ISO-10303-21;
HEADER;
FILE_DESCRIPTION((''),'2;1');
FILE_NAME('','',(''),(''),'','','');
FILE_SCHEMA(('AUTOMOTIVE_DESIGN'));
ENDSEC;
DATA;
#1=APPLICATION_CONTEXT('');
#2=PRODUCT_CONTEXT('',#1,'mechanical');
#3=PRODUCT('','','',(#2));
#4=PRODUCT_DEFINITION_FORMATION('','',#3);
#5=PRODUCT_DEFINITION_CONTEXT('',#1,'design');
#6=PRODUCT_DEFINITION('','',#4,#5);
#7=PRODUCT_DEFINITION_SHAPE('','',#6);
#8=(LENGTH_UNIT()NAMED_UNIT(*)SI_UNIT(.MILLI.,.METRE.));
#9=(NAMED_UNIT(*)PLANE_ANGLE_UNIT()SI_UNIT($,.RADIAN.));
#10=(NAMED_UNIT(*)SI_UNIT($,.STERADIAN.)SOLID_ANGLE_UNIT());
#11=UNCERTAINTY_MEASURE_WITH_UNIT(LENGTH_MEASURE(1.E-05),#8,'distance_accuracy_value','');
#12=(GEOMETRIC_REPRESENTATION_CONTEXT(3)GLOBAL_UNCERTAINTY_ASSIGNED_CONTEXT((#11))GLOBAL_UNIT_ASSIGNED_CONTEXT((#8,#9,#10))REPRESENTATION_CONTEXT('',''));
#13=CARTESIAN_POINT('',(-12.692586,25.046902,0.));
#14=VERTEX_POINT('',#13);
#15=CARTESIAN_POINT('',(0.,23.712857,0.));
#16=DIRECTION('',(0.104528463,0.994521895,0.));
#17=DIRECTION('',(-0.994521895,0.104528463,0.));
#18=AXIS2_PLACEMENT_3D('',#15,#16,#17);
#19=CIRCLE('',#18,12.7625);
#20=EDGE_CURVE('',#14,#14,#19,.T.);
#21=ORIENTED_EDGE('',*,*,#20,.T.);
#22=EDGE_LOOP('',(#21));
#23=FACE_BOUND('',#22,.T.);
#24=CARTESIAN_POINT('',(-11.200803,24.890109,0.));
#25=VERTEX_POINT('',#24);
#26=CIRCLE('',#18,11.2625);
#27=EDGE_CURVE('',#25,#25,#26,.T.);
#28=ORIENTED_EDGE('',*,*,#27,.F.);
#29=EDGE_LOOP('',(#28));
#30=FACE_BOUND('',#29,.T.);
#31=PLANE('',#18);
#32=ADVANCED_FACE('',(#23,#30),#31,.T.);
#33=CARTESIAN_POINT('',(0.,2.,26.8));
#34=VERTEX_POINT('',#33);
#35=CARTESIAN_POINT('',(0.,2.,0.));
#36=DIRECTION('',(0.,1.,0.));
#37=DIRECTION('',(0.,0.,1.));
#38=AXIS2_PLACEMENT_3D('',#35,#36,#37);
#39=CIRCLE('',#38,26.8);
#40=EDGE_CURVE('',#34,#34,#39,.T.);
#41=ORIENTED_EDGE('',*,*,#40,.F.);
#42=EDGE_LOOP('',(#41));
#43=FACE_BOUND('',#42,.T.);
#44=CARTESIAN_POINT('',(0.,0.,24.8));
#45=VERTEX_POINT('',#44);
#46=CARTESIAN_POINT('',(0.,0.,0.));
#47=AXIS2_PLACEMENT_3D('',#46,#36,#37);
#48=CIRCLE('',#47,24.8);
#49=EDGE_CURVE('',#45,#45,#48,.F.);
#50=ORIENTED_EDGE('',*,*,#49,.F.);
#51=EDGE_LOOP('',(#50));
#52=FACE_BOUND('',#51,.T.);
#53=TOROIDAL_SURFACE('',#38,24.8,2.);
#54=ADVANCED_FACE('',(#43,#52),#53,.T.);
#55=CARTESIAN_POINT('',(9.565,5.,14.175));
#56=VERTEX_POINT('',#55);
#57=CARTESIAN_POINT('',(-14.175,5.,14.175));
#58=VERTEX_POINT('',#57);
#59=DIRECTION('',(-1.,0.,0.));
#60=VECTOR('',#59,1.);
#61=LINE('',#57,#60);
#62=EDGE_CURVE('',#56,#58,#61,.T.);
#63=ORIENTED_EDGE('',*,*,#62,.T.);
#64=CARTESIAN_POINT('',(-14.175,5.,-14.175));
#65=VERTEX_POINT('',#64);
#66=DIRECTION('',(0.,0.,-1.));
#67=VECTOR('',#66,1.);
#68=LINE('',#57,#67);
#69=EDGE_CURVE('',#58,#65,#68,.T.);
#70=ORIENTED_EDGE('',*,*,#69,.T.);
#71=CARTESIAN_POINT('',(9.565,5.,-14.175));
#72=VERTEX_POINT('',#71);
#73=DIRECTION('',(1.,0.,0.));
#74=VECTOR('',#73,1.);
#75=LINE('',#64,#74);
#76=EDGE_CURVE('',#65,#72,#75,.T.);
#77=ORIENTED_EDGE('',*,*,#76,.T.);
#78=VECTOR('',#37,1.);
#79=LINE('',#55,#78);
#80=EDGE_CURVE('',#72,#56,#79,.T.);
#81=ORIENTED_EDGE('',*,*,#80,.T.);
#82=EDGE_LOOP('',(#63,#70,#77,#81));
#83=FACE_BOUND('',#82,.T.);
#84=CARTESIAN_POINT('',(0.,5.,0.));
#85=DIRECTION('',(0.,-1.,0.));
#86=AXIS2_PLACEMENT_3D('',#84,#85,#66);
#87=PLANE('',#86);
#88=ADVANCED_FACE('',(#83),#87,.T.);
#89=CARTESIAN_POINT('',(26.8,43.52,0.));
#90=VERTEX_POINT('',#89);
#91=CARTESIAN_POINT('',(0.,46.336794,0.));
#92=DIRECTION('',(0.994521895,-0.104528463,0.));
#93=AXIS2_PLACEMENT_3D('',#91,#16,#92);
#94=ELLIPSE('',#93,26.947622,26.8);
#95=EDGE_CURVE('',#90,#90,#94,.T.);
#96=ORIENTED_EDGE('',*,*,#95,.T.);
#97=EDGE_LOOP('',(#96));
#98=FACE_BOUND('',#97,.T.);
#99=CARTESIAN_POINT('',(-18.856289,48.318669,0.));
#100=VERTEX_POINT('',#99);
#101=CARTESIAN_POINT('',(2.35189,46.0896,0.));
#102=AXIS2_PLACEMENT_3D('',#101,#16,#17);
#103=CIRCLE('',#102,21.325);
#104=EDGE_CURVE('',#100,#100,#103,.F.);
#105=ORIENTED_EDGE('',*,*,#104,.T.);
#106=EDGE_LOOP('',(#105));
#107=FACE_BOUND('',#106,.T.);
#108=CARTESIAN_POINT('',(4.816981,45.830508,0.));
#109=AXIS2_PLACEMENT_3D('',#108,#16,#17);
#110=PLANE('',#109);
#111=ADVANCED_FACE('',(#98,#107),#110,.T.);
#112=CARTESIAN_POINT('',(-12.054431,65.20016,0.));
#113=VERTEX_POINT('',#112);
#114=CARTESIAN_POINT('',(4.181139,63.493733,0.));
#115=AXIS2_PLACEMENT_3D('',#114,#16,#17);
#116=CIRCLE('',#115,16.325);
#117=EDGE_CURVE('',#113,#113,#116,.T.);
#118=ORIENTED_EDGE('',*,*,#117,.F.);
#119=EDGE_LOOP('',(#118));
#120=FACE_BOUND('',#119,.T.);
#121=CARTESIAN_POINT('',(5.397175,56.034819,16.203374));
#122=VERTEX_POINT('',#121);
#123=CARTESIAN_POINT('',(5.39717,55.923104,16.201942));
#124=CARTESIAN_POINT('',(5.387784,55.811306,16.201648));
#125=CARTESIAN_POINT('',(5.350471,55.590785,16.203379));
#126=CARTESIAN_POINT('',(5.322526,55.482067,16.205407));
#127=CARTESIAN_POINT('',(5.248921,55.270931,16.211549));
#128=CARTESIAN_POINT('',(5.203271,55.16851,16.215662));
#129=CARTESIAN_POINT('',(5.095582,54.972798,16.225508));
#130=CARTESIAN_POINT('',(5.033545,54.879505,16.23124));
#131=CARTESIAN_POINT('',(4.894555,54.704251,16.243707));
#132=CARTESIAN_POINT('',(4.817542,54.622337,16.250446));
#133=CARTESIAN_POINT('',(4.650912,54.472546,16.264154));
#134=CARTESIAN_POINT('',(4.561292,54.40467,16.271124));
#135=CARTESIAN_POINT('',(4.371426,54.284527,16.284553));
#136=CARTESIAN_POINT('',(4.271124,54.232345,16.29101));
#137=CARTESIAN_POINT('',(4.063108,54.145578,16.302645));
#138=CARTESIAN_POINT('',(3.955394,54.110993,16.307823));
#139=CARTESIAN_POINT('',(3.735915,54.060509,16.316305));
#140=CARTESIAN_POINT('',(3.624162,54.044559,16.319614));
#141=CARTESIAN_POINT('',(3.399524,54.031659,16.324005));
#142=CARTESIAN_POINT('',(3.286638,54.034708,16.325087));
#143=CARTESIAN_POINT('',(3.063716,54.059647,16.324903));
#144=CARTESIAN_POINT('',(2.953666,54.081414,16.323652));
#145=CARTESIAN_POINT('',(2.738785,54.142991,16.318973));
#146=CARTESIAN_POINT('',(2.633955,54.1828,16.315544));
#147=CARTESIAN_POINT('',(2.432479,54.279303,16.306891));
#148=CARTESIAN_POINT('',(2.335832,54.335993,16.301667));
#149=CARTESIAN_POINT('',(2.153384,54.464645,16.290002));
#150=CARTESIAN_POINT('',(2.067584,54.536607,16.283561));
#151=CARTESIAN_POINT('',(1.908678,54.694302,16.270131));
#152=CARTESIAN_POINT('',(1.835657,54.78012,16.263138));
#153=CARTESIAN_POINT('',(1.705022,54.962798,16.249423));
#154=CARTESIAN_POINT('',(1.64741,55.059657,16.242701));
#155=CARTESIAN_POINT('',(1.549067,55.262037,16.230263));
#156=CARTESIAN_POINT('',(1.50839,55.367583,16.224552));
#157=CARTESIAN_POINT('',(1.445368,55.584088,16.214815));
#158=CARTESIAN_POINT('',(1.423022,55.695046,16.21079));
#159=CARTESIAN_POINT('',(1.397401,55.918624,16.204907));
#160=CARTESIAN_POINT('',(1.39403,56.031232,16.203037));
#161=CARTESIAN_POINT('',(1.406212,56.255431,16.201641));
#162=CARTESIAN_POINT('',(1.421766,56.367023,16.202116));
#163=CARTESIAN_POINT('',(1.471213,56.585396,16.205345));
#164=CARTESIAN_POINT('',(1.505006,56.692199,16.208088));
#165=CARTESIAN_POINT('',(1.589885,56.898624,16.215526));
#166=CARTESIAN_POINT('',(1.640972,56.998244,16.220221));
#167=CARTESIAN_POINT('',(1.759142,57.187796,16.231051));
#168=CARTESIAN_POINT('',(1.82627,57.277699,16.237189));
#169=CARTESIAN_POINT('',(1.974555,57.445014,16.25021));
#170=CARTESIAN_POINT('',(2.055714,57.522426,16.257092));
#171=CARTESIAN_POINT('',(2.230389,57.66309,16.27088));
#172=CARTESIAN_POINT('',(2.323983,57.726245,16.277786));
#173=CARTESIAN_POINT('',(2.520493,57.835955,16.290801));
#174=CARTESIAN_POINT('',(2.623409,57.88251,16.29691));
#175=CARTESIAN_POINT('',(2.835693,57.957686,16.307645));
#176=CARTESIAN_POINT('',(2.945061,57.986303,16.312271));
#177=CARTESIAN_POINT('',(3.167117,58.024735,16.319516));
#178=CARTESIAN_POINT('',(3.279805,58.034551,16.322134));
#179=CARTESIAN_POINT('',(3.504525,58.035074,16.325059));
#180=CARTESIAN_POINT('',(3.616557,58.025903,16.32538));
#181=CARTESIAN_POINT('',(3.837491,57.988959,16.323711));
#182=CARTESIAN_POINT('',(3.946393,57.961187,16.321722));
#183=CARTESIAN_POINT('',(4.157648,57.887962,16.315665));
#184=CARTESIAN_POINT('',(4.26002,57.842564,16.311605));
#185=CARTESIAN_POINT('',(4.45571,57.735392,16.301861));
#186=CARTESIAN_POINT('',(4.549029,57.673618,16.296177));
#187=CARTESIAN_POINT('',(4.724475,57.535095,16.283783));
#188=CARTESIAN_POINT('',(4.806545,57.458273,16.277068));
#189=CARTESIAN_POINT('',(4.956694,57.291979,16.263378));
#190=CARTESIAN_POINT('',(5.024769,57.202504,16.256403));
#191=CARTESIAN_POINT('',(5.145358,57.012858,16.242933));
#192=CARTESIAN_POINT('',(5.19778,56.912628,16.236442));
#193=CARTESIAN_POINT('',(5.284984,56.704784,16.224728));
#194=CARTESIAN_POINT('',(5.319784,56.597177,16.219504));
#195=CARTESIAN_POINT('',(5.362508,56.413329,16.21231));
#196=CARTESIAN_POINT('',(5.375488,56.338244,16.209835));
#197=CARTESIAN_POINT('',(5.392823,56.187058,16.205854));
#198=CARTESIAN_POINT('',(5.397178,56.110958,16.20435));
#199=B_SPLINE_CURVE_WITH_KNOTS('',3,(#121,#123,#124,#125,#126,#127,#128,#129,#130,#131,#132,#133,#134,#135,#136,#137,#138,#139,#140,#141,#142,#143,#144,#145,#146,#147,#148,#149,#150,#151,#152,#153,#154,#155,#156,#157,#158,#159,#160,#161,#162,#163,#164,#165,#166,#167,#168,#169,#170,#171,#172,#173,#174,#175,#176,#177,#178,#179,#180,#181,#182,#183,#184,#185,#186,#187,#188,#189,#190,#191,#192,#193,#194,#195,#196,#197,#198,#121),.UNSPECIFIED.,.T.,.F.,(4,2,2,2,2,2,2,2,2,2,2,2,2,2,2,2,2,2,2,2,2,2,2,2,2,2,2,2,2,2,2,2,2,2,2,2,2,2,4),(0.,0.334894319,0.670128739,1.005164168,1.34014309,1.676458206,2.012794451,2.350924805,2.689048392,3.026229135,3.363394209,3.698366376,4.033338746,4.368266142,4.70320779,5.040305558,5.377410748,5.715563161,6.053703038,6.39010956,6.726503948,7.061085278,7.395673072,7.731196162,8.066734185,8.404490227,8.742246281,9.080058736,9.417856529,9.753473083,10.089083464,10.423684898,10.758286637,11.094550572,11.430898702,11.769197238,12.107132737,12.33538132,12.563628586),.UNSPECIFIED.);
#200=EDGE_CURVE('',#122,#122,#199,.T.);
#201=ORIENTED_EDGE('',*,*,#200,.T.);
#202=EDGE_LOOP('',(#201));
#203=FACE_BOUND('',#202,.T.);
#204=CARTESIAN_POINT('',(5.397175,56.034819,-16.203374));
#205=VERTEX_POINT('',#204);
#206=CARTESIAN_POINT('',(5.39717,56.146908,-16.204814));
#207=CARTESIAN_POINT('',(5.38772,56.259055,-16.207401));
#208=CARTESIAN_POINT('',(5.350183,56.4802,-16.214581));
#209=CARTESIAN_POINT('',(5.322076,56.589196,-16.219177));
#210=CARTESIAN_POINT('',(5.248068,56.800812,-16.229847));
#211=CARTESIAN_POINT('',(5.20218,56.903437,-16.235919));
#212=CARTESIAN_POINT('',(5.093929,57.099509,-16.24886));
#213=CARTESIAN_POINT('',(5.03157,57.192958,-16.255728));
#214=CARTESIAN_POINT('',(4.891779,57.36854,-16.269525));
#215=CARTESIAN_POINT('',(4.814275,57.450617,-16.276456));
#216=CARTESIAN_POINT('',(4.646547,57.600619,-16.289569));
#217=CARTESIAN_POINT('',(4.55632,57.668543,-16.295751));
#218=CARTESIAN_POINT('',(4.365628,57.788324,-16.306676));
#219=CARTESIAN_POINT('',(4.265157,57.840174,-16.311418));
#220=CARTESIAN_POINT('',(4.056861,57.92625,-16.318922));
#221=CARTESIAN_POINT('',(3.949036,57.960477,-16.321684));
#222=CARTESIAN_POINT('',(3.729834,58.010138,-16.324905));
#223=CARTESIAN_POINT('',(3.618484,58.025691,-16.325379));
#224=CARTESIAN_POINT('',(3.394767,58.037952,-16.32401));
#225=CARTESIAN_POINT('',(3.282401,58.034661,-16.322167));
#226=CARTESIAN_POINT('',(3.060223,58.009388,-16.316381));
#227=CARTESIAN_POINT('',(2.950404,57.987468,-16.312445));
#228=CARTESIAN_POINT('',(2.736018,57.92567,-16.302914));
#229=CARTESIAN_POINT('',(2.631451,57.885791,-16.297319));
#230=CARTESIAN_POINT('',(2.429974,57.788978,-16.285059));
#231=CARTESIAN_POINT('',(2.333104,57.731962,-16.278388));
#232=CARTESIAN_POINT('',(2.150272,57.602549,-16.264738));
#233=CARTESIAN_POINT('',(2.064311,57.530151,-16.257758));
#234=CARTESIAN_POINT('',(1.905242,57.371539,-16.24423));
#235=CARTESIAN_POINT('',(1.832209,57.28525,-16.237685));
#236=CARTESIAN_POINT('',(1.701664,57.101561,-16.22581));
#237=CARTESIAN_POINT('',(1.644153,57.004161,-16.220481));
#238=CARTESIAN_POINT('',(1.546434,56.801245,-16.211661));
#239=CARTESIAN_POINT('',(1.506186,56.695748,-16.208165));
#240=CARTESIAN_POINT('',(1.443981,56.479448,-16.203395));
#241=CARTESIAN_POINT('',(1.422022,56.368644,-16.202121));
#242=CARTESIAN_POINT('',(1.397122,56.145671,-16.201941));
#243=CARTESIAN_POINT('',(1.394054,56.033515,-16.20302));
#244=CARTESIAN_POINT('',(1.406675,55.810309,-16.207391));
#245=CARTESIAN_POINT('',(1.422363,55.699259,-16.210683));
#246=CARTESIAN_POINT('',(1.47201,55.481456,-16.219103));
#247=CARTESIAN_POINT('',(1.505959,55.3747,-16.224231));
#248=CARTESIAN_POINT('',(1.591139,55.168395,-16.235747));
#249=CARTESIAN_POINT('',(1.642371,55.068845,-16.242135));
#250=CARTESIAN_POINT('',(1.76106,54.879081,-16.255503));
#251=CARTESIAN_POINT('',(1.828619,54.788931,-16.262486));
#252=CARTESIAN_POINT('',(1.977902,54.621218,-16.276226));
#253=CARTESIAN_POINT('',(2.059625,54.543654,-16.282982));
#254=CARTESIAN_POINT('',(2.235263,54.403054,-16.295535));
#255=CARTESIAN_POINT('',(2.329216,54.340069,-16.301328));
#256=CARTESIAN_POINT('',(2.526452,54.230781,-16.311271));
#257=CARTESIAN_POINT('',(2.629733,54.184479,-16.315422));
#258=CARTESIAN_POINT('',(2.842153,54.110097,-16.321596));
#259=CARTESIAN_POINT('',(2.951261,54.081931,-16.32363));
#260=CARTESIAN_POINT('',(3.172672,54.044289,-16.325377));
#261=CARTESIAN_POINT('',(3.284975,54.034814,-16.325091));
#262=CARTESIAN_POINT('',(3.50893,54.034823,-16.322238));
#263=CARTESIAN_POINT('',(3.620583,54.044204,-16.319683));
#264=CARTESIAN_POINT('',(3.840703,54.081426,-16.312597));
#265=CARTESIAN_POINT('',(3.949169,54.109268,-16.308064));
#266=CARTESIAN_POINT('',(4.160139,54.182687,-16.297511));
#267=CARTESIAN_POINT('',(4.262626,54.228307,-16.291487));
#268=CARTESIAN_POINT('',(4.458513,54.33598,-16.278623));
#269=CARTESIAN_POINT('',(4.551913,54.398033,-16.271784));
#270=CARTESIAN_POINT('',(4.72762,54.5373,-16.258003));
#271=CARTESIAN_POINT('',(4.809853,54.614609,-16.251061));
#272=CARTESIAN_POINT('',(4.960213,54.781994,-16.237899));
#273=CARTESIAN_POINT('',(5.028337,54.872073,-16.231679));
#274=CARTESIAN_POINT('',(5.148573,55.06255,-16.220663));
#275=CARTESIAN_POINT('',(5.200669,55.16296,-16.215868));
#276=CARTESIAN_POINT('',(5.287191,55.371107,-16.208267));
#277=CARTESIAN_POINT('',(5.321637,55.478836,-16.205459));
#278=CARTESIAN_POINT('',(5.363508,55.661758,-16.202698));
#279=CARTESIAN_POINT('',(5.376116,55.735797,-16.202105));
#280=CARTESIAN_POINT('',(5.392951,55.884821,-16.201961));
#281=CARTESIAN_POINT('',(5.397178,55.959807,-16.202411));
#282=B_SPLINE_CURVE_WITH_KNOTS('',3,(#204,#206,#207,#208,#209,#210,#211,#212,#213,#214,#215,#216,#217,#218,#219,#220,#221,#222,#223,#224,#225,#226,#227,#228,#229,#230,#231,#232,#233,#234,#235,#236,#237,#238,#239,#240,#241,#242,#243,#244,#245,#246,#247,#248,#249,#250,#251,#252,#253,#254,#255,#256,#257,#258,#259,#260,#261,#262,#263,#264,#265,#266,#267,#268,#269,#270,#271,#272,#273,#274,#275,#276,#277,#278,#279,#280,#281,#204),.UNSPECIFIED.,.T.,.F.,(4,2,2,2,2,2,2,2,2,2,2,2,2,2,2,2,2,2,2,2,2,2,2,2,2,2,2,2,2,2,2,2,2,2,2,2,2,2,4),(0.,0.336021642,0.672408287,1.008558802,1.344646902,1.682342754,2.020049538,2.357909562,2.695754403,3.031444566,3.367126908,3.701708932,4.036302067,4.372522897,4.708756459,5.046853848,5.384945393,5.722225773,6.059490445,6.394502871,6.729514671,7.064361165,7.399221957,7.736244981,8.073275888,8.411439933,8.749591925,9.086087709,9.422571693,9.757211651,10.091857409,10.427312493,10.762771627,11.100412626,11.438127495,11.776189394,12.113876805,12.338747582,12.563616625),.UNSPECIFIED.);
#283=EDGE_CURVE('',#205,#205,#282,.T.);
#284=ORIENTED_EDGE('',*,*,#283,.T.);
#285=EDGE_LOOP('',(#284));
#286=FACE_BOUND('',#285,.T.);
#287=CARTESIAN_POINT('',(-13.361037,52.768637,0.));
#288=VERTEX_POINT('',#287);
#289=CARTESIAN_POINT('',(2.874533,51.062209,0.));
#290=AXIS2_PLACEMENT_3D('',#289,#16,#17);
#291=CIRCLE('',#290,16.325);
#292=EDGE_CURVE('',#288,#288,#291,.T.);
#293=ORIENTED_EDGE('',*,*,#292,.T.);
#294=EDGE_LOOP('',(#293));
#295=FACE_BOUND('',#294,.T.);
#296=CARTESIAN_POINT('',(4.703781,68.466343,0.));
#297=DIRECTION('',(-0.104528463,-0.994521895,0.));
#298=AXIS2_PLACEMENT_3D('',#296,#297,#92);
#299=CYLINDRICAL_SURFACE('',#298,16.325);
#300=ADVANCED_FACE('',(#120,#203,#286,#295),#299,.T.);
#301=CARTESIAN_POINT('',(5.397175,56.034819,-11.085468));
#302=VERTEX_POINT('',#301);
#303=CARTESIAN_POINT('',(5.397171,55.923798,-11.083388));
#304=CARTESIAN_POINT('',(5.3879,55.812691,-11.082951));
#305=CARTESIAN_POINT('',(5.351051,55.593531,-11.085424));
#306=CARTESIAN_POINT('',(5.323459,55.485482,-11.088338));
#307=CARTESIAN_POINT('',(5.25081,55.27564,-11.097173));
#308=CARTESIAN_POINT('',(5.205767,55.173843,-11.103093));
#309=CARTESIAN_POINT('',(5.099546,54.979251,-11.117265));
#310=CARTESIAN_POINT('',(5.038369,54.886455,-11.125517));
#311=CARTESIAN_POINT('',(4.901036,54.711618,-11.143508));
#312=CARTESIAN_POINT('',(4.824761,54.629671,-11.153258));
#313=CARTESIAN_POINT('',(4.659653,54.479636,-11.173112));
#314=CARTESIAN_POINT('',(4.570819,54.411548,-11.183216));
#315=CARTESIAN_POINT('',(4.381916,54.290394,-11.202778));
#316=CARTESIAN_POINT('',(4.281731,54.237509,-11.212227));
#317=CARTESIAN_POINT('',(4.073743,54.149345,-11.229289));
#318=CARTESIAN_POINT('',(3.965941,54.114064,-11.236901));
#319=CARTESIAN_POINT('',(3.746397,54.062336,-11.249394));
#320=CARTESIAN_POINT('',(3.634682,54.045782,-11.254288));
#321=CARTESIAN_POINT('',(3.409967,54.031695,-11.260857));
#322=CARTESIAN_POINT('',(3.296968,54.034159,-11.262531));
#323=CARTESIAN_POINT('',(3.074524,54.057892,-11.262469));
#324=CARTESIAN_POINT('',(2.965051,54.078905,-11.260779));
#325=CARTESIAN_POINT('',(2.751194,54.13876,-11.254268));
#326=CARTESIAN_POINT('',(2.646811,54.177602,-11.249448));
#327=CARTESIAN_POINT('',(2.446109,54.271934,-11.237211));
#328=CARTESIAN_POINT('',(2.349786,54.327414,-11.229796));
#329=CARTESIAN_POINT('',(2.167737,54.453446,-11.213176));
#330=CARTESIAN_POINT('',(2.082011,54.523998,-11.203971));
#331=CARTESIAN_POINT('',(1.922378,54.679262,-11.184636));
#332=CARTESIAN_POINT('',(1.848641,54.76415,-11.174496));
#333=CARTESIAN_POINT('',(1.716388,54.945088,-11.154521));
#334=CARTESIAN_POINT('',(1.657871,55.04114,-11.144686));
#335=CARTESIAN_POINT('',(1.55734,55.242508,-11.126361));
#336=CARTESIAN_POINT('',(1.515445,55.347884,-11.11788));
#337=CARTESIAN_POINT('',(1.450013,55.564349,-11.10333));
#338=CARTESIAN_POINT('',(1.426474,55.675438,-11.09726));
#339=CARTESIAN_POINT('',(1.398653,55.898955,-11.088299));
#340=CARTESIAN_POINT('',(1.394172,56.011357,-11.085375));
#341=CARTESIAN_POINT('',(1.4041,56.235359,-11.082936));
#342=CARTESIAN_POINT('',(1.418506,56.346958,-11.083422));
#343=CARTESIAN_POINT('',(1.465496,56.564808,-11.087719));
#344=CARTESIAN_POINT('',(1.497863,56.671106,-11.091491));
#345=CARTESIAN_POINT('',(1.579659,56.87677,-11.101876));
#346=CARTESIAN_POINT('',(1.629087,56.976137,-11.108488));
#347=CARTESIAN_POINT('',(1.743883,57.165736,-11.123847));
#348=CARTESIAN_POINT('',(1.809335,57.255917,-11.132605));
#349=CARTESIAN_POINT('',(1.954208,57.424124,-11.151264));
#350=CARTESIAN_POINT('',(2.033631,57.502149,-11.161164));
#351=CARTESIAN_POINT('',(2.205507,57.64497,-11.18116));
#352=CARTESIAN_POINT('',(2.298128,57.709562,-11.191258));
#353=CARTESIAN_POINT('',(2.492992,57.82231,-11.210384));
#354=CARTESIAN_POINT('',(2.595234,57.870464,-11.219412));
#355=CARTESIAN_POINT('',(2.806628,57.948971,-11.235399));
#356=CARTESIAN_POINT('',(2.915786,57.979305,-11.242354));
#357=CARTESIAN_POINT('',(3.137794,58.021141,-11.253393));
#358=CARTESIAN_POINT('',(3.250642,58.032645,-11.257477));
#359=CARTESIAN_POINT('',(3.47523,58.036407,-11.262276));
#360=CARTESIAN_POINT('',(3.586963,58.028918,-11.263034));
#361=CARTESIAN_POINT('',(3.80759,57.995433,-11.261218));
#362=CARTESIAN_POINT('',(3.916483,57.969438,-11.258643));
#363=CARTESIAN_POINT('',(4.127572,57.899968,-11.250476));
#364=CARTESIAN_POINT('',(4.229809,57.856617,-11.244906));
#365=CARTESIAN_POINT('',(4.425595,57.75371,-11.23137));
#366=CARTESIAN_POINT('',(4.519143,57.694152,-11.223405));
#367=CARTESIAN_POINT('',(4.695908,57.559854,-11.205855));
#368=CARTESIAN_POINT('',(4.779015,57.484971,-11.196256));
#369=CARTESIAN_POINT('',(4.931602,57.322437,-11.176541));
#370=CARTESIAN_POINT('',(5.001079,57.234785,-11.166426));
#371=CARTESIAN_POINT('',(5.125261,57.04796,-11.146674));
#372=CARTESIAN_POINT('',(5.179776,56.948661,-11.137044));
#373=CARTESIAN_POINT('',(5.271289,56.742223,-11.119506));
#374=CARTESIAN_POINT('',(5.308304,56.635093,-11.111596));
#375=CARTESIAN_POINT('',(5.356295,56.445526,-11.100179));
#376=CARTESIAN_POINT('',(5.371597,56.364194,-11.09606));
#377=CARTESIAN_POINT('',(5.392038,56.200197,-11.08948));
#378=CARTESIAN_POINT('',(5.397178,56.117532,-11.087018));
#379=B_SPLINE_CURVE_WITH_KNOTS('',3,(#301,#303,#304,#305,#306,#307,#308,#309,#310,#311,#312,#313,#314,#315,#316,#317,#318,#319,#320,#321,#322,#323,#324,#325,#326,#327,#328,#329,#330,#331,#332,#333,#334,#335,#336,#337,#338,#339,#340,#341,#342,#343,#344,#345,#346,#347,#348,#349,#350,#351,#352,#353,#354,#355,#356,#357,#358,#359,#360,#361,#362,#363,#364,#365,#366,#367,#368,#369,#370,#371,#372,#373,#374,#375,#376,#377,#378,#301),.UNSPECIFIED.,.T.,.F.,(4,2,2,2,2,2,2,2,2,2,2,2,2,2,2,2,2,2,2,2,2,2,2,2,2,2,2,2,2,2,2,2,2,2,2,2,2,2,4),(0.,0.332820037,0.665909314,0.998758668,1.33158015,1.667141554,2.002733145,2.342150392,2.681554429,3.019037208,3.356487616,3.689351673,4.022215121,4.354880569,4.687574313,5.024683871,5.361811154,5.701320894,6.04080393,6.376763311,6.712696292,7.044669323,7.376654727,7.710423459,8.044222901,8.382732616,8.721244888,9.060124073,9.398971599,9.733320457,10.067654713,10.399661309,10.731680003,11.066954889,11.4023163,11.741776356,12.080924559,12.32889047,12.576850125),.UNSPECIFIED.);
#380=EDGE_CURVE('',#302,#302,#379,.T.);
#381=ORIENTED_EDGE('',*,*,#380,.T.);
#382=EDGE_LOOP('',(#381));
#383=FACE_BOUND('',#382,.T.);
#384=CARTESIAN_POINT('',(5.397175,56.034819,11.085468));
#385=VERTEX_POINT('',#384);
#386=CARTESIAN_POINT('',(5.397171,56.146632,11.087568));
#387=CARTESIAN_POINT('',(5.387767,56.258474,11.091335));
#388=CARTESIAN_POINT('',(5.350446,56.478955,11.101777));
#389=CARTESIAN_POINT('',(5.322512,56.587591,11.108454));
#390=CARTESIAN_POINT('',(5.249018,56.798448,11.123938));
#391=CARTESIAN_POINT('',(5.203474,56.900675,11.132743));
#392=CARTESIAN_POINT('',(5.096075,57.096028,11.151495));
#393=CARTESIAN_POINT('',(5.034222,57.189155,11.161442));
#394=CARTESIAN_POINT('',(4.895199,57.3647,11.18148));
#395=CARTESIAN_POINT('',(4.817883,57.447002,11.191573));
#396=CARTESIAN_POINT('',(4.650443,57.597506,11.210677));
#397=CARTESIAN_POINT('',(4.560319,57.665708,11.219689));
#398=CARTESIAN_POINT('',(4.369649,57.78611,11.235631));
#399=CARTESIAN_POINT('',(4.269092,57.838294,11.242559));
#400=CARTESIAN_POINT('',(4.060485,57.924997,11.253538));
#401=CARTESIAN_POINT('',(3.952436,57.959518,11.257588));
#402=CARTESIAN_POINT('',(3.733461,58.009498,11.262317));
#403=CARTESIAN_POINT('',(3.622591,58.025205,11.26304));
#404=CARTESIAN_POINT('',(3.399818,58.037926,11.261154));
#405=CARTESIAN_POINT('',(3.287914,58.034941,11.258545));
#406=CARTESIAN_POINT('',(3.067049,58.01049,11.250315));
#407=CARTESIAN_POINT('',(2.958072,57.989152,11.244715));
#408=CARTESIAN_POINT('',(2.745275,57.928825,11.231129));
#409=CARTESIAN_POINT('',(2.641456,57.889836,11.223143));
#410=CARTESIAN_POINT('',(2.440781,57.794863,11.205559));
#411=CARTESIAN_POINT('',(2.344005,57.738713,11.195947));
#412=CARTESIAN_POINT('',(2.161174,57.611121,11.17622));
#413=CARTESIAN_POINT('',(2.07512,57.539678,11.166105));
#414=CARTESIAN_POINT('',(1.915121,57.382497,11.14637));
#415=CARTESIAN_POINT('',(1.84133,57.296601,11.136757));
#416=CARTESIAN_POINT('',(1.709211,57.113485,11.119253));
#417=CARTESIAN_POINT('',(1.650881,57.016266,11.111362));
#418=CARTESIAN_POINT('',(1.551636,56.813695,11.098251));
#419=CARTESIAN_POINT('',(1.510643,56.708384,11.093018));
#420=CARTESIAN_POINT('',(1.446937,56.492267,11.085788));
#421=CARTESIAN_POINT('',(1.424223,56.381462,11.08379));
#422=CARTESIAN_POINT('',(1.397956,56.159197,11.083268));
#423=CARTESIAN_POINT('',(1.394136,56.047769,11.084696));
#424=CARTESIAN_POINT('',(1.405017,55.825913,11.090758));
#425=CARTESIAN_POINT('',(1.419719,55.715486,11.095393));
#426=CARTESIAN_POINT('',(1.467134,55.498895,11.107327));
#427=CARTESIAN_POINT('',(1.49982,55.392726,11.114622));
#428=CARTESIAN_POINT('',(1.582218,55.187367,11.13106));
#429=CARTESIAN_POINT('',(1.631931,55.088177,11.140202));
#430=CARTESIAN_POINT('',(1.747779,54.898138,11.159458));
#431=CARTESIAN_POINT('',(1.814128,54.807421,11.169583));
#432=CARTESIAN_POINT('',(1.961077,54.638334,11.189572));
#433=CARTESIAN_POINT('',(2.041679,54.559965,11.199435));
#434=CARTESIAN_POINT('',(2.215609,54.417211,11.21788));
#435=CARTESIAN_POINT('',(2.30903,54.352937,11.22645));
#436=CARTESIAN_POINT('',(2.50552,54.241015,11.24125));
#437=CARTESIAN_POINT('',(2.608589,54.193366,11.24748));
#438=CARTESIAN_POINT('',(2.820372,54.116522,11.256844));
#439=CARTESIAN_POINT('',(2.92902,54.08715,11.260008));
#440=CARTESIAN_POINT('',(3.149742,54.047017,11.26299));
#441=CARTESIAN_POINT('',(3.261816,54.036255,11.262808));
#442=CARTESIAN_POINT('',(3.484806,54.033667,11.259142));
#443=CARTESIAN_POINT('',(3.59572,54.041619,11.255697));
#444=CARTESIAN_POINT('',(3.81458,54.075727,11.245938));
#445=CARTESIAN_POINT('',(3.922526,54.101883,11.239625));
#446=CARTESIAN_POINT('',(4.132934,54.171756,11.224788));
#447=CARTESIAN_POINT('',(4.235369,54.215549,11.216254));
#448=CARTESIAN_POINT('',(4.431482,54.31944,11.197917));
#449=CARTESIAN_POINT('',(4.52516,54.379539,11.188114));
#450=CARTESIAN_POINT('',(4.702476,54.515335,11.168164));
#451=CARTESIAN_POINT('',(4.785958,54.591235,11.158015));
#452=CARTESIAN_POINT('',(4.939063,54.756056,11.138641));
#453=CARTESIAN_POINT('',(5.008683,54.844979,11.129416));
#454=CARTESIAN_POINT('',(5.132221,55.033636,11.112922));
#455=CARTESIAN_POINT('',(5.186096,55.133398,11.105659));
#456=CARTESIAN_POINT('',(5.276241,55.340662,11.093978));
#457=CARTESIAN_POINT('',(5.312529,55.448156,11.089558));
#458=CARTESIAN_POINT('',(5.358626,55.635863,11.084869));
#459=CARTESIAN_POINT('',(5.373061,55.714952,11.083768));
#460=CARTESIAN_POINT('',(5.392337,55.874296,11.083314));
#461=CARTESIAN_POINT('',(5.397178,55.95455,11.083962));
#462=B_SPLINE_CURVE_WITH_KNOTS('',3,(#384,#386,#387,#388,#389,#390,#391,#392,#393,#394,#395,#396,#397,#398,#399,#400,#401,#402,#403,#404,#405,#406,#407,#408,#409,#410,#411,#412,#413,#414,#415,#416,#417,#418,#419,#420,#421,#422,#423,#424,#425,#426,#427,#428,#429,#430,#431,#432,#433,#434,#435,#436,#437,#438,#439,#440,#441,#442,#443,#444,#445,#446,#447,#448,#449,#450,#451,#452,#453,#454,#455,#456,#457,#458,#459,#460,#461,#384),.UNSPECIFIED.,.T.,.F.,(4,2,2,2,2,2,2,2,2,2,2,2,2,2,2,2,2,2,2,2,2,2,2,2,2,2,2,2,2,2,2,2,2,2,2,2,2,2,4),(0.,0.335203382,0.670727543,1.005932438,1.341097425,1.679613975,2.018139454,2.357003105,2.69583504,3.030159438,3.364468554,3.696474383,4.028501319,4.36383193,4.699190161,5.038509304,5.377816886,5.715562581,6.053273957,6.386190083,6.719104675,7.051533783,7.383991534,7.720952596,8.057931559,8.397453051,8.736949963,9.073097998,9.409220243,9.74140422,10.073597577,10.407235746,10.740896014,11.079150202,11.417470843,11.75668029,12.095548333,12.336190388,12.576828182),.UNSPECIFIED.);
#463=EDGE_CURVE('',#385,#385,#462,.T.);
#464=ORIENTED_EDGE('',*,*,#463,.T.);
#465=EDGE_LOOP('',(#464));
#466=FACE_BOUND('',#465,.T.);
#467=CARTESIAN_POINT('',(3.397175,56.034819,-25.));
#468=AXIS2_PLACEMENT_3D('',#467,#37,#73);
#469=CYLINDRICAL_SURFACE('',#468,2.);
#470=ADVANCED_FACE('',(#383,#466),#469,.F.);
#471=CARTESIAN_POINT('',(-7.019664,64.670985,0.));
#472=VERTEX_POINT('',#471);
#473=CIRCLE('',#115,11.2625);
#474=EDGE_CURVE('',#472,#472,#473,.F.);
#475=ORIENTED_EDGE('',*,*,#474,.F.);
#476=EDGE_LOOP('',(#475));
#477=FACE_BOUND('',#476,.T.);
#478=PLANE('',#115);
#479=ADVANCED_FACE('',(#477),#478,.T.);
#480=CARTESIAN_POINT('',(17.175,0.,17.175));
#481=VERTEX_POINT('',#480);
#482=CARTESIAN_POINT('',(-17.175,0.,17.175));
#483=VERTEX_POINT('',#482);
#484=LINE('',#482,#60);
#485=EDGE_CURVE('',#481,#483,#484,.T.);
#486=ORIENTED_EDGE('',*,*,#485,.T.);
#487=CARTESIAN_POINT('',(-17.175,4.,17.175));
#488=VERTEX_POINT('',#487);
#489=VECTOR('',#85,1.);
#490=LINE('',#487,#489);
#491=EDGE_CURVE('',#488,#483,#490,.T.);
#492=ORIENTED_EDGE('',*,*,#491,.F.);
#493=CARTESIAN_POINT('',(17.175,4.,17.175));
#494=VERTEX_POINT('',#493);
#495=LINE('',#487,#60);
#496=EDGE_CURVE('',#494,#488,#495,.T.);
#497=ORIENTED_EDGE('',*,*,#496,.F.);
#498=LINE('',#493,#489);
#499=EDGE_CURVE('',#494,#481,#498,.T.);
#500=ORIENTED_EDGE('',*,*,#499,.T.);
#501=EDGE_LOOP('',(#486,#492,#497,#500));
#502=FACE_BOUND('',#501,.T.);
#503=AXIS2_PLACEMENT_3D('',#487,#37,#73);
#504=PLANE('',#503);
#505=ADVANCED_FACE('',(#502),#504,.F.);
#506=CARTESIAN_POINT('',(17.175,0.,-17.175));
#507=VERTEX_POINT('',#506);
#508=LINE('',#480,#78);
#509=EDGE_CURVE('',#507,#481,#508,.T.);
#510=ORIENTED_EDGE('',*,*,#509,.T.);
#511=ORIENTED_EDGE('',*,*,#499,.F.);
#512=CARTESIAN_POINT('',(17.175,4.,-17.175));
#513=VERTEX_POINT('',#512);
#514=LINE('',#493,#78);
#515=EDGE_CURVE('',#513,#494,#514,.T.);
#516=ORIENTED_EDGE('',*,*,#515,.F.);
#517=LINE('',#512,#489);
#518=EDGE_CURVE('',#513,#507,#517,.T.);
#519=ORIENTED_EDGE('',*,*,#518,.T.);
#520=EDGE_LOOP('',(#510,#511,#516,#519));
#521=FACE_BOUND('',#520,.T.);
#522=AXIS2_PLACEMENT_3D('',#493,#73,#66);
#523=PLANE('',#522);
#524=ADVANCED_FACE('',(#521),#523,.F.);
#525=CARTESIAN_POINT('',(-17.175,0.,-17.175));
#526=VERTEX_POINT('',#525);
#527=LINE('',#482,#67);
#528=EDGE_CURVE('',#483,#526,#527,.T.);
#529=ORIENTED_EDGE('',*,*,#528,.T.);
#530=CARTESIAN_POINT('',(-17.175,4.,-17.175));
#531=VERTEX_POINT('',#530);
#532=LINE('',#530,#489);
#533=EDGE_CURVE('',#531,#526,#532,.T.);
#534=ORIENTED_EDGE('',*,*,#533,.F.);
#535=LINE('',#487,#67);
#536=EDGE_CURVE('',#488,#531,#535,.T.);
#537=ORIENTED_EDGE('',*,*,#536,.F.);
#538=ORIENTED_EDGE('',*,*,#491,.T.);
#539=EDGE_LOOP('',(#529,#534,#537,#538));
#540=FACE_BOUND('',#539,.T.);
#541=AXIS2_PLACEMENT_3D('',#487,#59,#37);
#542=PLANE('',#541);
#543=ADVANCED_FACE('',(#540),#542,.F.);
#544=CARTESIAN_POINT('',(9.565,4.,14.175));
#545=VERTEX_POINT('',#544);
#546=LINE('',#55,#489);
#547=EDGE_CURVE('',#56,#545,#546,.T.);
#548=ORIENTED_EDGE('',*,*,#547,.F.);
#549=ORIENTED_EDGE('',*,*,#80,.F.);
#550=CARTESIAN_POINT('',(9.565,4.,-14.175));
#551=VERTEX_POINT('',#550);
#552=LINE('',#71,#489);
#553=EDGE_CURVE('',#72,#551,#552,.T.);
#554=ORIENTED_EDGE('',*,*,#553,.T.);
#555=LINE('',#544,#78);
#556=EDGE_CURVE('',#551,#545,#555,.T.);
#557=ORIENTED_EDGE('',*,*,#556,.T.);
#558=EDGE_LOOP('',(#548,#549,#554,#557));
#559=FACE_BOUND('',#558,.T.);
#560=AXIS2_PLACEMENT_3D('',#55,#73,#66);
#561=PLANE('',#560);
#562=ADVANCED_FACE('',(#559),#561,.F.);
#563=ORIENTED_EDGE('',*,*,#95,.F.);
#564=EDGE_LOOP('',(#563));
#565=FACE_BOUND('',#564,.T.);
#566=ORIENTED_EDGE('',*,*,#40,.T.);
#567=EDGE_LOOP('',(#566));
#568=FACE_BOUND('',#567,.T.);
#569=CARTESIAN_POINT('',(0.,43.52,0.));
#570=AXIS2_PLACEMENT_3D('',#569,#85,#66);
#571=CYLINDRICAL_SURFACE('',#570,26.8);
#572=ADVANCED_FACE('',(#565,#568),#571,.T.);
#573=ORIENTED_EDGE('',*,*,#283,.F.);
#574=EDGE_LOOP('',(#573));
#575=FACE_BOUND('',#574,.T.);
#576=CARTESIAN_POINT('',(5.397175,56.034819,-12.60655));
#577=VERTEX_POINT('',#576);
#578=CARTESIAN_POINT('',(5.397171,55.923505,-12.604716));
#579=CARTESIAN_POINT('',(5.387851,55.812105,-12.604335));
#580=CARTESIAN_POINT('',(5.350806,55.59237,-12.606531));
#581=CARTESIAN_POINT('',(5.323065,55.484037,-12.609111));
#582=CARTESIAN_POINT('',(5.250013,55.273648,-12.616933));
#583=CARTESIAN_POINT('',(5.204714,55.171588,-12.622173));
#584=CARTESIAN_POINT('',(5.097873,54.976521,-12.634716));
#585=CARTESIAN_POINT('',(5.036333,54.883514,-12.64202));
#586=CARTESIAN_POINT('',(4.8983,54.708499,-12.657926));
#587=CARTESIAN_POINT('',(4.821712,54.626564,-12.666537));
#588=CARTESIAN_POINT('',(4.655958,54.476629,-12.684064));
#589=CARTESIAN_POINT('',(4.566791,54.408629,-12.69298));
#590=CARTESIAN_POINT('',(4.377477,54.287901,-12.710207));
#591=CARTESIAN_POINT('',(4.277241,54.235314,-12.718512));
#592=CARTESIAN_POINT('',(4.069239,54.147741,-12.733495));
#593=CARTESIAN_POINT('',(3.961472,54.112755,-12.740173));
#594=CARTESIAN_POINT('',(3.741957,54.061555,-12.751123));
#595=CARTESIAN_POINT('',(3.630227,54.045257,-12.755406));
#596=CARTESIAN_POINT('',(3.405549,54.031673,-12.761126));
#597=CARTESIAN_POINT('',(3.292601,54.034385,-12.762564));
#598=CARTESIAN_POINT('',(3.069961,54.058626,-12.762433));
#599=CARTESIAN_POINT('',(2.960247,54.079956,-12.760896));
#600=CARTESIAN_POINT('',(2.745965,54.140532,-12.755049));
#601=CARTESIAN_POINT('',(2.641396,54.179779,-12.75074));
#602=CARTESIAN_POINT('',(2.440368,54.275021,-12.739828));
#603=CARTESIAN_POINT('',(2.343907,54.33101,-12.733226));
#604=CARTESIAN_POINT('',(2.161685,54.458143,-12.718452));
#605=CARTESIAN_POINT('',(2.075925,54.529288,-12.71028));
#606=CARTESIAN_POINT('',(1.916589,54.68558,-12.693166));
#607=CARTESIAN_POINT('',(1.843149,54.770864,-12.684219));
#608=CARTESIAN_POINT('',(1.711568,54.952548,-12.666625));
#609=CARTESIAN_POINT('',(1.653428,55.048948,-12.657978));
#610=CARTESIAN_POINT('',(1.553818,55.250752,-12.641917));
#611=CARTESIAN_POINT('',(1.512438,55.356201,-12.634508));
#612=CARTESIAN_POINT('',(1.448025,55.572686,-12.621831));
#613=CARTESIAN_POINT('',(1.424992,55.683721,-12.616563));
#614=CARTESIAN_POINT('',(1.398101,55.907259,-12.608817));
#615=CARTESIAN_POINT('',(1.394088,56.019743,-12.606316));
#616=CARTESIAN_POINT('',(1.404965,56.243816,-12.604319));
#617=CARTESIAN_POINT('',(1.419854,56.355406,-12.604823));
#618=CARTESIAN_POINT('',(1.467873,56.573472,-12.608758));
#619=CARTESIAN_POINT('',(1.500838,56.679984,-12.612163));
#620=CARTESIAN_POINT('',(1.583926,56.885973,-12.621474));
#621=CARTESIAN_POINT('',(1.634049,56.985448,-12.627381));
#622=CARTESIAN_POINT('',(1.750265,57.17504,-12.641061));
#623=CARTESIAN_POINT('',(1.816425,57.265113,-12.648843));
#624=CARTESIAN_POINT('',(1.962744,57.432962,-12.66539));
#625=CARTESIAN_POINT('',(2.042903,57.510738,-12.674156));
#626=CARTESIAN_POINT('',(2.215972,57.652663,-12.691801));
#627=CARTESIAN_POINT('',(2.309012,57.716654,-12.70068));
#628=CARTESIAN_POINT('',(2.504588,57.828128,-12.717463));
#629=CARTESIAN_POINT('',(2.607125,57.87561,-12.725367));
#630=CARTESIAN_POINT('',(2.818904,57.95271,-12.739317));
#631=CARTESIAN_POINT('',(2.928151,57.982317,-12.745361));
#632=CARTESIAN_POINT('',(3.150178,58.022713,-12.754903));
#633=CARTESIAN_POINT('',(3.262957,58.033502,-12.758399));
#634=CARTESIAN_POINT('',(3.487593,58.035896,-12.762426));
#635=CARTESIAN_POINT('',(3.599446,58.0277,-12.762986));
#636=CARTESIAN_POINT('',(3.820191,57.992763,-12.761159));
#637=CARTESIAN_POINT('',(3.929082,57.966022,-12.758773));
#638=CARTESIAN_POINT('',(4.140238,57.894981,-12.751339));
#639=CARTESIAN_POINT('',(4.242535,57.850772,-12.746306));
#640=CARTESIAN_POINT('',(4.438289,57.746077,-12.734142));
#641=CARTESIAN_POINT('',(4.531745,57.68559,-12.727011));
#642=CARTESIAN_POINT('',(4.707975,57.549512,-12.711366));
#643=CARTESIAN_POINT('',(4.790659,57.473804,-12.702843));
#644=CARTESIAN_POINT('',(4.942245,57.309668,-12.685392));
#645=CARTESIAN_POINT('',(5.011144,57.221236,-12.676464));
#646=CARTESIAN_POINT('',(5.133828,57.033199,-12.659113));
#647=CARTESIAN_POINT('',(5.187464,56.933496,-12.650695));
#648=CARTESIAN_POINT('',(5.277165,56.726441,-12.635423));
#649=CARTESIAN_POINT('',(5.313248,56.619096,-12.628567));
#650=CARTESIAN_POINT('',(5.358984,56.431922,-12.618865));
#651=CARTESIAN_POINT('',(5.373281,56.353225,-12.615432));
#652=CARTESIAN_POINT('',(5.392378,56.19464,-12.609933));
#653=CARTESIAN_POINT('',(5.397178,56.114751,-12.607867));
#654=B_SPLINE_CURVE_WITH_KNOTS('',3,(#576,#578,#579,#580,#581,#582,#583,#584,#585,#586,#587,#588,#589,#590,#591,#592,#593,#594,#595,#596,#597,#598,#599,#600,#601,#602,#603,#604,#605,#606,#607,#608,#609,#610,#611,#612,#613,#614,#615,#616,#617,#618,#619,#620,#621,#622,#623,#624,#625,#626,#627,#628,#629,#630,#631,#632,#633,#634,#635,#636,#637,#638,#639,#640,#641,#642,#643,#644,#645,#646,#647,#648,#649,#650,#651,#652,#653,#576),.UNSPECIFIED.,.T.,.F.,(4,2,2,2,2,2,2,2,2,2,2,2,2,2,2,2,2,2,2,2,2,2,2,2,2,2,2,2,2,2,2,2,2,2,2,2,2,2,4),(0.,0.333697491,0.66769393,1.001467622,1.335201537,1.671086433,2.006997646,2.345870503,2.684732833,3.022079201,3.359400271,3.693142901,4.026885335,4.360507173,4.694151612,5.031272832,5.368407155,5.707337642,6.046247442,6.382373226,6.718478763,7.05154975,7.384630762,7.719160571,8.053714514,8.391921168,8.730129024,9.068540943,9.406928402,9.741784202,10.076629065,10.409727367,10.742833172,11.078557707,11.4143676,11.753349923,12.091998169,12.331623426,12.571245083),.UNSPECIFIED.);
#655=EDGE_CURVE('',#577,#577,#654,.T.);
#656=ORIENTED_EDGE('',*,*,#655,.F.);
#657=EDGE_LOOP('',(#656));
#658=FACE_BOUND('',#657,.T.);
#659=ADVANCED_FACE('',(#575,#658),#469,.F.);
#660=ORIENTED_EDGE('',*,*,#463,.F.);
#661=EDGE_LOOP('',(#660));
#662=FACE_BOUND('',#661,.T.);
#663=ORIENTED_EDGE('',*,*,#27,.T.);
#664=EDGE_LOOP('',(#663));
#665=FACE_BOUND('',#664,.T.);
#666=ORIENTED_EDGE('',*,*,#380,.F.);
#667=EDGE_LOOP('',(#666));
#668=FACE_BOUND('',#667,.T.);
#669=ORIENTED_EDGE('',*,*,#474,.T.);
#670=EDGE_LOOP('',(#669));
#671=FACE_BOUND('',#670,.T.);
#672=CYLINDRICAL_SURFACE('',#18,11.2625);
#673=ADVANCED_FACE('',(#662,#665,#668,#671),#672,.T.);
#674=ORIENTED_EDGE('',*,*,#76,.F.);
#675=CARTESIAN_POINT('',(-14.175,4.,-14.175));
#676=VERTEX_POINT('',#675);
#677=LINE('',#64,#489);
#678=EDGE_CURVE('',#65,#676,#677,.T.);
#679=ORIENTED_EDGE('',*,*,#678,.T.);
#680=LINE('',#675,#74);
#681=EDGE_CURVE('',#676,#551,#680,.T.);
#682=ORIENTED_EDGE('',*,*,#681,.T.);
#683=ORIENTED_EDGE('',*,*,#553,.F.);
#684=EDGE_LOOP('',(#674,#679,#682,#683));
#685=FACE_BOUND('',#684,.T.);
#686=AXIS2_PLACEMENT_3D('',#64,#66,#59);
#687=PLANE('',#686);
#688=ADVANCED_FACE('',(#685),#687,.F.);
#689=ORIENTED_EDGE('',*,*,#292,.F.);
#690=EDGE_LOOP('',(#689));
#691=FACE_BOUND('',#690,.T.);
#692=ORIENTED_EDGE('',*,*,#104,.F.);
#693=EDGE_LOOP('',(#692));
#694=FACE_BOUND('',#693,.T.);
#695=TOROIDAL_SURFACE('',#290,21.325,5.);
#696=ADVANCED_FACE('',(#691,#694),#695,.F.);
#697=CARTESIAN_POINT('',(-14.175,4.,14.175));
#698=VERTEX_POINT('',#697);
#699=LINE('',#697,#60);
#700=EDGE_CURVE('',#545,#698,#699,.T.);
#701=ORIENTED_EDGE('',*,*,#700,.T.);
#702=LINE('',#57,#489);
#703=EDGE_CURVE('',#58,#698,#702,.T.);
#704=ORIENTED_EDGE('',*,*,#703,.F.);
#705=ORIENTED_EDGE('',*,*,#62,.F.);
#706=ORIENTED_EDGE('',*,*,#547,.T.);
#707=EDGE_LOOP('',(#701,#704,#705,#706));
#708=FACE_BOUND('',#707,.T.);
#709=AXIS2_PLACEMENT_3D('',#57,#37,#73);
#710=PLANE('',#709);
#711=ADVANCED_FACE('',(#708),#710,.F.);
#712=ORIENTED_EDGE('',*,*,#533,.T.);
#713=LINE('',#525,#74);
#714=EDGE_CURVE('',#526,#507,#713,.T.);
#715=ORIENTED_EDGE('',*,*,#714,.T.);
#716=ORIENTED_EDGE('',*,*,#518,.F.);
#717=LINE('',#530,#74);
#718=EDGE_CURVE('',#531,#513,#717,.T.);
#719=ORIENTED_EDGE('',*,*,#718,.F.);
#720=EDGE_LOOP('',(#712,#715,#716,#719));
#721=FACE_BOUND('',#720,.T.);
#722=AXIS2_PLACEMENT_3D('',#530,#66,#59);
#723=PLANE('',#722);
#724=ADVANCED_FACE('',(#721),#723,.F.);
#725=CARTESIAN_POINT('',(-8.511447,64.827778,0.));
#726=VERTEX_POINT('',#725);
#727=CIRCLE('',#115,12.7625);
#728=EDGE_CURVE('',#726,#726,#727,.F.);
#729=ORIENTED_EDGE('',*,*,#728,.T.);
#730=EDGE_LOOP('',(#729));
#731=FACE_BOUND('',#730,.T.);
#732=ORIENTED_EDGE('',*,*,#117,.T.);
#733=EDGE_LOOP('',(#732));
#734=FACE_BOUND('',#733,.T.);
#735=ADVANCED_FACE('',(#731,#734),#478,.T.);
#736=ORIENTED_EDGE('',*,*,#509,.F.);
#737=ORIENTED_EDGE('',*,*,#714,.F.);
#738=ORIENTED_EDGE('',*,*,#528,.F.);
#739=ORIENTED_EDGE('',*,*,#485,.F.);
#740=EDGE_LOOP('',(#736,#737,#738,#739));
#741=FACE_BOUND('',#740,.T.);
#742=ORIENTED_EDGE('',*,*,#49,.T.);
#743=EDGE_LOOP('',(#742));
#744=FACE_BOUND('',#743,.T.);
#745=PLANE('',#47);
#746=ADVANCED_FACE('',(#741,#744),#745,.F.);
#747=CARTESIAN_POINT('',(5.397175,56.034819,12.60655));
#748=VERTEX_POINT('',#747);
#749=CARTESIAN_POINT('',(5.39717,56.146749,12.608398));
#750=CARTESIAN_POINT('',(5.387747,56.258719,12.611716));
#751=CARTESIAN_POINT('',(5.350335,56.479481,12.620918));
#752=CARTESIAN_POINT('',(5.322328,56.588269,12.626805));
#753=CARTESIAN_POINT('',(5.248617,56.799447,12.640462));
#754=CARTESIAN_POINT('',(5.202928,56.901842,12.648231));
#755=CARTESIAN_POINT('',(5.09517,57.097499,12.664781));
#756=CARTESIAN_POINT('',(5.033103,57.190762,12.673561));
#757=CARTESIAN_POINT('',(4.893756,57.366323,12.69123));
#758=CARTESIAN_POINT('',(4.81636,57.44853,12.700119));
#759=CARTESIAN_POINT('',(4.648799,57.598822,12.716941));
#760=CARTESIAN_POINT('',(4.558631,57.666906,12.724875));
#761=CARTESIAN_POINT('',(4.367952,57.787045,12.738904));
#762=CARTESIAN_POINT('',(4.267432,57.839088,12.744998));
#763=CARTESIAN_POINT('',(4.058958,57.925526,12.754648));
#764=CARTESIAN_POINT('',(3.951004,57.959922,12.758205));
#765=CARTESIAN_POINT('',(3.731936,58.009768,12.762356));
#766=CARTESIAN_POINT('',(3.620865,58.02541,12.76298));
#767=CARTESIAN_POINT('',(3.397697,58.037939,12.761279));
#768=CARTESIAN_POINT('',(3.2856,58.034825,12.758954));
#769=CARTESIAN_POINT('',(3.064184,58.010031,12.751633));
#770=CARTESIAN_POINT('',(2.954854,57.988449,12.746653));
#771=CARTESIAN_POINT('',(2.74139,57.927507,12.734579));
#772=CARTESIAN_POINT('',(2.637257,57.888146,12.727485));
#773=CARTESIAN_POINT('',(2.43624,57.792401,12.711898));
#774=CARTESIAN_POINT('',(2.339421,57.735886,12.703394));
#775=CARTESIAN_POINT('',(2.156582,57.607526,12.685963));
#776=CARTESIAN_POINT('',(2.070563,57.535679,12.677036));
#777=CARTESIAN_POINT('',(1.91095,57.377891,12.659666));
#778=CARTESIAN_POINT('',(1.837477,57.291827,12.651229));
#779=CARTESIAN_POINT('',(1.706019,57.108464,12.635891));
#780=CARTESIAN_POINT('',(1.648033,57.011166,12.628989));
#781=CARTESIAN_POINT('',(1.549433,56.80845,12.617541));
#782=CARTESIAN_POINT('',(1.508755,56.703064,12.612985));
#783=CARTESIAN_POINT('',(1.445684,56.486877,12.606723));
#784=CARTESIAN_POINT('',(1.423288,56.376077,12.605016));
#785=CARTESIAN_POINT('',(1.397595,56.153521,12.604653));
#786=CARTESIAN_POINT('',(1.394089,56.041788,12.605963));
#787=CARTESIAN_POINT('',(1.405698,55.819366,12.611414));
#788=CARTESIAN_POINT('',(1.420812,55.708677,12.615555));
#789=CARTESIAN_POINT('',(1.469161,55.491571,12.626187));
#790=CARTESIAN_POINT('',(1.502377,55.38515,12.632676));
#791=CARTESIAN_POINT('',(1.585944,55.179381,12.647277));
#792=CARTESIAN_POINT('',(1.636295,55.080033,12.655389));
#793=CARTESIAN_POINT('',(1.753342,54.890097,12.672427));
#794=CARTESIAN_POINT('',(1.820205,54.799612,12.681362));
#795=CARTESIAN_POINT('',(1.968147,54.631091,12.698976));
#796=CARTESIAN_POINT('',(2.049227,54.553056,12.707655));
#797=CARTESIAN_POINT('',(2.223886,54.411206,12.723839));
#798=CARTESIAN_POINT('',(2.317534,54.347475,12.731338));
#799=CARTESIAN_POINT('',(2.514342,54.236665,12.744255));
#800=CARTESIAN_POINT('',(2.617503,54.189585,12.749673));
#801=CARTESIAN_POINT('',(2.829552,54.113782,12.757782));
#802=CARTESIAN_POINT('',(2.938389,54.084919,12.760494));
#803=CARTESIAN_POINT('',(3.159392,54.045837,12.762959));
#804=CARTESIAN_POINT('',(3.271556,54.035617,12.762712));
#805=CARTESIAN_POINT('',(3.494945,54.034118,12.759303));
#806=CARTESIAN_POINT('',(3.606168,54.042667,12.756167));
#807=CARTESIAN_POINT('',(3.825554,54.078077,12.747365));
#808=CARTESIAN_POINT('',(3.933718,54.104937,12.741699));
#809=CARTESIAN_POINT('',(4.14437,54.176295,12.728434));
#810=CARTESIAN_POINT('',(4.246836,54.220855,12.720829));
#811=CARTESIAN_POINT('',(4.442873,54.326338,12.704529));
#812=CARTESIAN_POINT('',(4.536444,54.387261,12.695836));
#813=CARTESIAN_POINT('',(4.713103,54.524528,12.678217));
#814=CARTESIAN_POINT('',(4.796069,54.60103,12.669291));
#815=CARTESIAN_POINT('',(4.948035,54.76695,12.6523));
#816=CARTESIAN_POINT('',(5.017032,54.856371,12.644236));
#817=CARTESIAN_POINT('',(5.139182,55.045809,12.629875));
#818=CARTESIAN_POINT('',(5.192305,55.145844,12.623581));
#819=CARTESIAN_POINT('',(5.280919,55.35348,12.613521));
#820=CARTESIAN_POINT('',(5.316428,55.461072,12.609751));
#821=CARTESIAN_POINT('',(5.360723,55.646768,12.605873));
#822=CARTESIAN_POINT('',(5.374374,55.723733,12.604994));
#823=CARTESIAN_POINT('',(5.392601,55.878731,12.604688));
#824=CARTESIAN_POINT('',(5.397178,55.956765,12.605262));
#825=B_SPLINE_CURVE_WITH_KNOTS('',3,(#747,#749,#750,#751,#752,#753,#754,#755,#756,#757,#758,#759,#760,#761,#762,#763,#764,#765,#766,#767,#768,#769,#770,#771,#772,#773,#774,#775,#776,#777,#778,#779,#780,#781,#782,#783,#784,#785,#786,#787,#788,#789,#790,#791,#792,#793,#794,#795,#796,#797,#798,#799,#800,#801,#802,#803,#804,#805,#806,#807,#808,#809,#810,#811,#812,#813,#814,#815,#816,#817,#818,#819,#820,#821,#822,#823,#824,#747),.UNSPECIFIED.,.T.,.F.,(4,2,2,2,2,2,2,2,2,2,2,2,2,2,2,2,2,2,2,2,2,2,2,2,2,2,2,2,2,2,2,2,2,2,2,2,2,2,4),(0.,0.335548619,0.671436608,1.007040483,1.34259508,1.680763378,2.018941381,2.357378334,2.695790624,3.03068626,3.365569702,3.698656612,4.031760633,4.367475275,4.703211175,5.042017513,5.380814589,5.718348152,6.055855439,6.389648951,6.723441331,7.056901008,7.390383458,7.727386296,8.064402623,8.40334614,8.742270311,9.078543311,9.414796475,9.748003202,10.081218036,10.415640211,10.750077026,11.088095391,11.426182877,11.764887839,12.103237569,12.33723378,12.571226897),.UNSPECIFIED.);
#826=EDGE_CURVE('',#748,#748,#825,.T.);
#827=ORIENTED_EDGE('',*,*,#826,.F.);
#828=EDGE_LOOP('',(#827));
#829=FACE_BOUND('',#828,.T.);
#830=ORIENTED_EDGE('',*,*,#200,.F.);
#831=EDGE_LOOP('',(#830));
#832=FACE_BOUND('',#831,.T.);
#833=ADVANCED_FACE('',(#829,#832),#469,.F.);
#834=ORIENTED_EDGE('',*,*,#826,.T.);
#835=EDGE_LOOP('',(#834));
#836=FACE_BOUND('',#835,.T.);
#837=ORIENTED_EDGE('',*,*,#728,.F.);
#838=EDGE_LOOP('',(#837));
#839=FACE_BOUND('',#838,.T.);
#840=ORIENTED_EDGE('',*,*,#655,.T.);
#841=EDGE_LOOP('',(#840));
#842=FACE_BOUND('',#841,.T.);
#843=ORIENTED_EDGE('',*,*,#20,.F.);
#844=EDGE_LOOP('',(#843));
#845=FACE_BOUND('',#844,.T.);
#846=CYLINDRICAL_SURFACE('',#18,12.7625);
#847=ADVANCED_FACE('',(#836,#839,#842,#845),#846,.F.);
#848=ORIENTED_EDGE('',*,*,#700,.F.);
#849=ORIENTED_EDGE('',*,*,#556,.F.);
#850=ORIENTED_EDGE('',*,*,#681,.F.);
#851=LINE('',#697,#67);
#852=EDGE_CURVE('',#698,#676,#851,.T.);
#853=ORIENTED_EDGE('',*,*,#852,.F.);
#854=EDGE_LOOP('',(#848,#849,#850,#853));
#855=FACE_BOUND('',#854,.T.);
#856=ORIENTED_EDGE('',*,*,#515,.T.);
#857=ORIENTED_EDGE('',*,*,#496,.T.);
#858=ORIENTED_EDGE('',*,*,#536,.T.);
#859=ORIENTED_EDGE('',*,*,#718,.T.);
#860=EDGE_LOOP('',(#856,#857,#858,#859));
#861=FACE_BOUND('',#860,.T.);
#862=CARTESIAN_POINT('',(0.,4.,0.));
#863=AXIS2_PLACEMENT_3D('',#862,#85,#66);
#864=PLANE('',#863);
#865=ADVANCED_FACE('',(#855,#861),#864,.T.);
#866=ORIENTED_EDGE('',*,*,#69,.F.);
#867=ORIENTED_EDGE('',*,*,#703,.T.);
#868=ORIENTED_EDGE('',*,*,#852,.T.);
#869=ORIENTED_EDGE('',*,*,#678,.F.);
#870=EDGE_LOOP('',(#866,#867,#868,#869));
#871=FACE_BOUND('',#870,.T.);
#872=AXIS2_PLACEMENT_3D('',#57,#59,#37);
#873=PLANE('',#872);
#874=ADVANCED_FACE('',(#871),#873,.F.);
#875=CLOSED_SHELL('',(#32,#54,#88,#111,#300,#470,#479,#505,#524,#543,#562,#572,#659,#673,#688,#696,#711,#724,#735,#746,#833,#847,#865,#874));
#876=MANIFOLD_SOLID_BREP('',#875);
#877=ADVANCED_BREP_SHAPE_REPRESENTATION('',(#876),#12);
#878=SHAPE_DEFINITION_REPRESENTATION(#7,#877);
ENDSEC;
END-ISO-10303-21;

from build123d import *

# Parameters (mm, degrees)
SKETCH1_R                  = 26.8
MAIN_BODY_EXTRUDE_DEPTH    = 43.52
ANGLED_EXTRUDE_OUTLINE_R   = 26.8
ANGLED_EXTRUDE_DEPTH       = 5.63358701
ANGLED_START               = 46.082955702
ANGLED_EXTRUDE_2_OUTLINE_W = 57
ANGLED_EXTRUDE_2_OUTLINE_H = 56
ANGLED_EXTRUDE_2_DEPTH     = 6.917044298
SKETCH8_R                  = 16.325
ATTACHMENT_EXTRUDE_DEPTH   = 22.5
SKETCH11_R                 = 12.7625
SKETCH11_R_2               = 11.2625
TUBING_HOLE_DEPTH          = 45
SKETCH13_R                 = 2
BOLT_HOLE_DEPTH            = 25
SKETCH14_W                 = 34.35
SKETCH14_H                 = 34.35
CUT_EXTRUDE3_DEPTH         = 4
SKETCH16_W                 = 23.74
SKETCH16_H                 = 28.35
CUT_EXTRUDE5_DEPTH         = 1
FILLET3_R                  = 5
SKETCH18_R                 = 16.824719049
CUT_EXTRUDE6_DEPTH         = 5


with BuildPart() as part:
    # Sketch1 → Main Body Extrude (new body)
    with BuildSketch(Plane(origin=(0, 0, 0), x_dir=(1, 0, 0), z_dir=(0, 1, 0))):
        with Locations(Location((0, 0, 0), (0, 0, 270))):
            Circle(SKETCH1_R)
    extrude(amount=MAIN_BODY_EXTRUDE_DEPTH)

    # Angled Extrude: read off the stored shape, not the designer's step
    # Angled Extrude outline → Angled Extrude (add)
    with BuildSketch(Plane(origin=(0, 43.52, 0), x_dir=(1, 0, 0), z_dir=(0, 1, 0))):
        Circle(ANGLED_EXTRUDE_OUTLINE_R)
    extrude(amount=ANGLED_EXTRUDE_DEPTH)

    # Angled Extrude 2 outline → Angled Extrude 2 (cut)
    with BuildSketch(Plane(origin=(0, 0, 0), x_dir=(0.9945218953682733, -0.10452846326765303, 0), z_dir=(0.10452846326765304, 0.9945218953682734, 0)).offset(ANGLED_START)):
        with Locations((-4.5, 0)):
            Rectangle(ANGLED_EXTRUDE_2_OUTLINE_W, ANGLED_EXTRUDE_2_OUTLINE_H)
    extrude(amount=ANGLED_EXTRUDE_2_DEPTH, mode=Mode.SUBTRACT)

    # Sketch8 → Attachment Extrude (add)
    with BuildSketch(Plane(origin=(4.816980542, 45.830508449, 0), x_dir=(0.9945218953682734, -0.10452846326765328, 0), z_dir=(0.10452846326765328, 0.9945218953682734, 0))):
        with Locations((-2.478668524, 0)):
            Circle(SKETCH8_R)
    extrude(amount=ATTACHMENT_EXTRUDE_DEPTH)

    # Sketch11 → Tubing Hole (cut)
    with BuildSketch(Plane(origin=(7.168870966, 68.207251095, 0), x_dir=(0.9945218953682734, -0.10452846326765329, 0), z_dir=(0.10452846326765329, 0.9945218953682734, 0))):
        with Locations(Location((-2.478668524, 0, 0), (0, 0, 180))):
            Circle(SKETCH11_R)
        with Locations(Location((-2.478668524, 0, 0), (0, 0, 180))):
            Circle(SKETCH11_R_2, mode=Mode.SUBTRACT)
    extrude(amount=-TUBING_HOLE_DEPTH, mode=Mode.SUBTRACT)

    # Sketch13 → Bolt Hole (cut, symmetric)
    with BuildSketch(Plane.XY):
        with Locations((3.397175056, 56.034818814)):
            Circle(SKETCH13_R)
    extrude(amount=BOLT_HOLE_DEPTH, both=True, mode=Mode.SUBTRACT)

    # Sketch14 → Cut-Extrude3 (cut)
    with BuildSketch(Plane.XZ):
        Rectangle(SKETCH14_W, SKETCH14_H)
    extrude(amount=-CUT_EXTRUDE3_DEPTH, mode=Mode.SUBTRACT)

    # Sketch16 → Cut-Extrude5 (cut)
    with BuildSketch(Plane.XZ.offset(-4)):
        with Locations((-2.305, 0)):
            Rectangle(SKETCH16_W, SKETCH16_H)
    extrude(amount=-CUT_EXTRUDE5_DEPTH, mode=Mode.SUBTRACT)

    # Fillet1: read off the stored shape, not the designer's step
    # Fillet1 outline → Fillet1 (revolve, cut)
    with BuildSketch(Plane.XY):
        with BuildLine():
            ThreePointArc((26.8, 2), (26.214213562, 0.585786438), (24.8, 0))
            Line((24.8, 0), (26.8, 0))
            Line((26.8, 0), (26.8, 2))
        make_face()
    revolve(axis=Axis((0, 0, 0), (0, 1, 0)), mode=Mode.SUBTRACT)

    # Fillet3
    fillet3_edges = [part.edges().sort_by_distance(p)[0] for p in [
        (-13.883679518, 47.796027024, 0),
    ]]
    fillet(fillet3_edges, radius=FILLET3_R)

    # Sketch18 → Cut-Extrude6 (cut)
    with BuildSketch(Plane(origin=(7.168870966, 68.207251095, 0), x_dir=(0.9945218953682734, -0.10452846326765328, 0), z_dir=(0.10452846326765328, 0.9945218953682734, 0))):
        with Locations((-2.478668524, 0)):
            Circle(SKETCH18_R)
    extrude(amount=-CUT_EXTRUDE6_DEPTH, mode=Mode.SUBTRACT)


solid = part.part
